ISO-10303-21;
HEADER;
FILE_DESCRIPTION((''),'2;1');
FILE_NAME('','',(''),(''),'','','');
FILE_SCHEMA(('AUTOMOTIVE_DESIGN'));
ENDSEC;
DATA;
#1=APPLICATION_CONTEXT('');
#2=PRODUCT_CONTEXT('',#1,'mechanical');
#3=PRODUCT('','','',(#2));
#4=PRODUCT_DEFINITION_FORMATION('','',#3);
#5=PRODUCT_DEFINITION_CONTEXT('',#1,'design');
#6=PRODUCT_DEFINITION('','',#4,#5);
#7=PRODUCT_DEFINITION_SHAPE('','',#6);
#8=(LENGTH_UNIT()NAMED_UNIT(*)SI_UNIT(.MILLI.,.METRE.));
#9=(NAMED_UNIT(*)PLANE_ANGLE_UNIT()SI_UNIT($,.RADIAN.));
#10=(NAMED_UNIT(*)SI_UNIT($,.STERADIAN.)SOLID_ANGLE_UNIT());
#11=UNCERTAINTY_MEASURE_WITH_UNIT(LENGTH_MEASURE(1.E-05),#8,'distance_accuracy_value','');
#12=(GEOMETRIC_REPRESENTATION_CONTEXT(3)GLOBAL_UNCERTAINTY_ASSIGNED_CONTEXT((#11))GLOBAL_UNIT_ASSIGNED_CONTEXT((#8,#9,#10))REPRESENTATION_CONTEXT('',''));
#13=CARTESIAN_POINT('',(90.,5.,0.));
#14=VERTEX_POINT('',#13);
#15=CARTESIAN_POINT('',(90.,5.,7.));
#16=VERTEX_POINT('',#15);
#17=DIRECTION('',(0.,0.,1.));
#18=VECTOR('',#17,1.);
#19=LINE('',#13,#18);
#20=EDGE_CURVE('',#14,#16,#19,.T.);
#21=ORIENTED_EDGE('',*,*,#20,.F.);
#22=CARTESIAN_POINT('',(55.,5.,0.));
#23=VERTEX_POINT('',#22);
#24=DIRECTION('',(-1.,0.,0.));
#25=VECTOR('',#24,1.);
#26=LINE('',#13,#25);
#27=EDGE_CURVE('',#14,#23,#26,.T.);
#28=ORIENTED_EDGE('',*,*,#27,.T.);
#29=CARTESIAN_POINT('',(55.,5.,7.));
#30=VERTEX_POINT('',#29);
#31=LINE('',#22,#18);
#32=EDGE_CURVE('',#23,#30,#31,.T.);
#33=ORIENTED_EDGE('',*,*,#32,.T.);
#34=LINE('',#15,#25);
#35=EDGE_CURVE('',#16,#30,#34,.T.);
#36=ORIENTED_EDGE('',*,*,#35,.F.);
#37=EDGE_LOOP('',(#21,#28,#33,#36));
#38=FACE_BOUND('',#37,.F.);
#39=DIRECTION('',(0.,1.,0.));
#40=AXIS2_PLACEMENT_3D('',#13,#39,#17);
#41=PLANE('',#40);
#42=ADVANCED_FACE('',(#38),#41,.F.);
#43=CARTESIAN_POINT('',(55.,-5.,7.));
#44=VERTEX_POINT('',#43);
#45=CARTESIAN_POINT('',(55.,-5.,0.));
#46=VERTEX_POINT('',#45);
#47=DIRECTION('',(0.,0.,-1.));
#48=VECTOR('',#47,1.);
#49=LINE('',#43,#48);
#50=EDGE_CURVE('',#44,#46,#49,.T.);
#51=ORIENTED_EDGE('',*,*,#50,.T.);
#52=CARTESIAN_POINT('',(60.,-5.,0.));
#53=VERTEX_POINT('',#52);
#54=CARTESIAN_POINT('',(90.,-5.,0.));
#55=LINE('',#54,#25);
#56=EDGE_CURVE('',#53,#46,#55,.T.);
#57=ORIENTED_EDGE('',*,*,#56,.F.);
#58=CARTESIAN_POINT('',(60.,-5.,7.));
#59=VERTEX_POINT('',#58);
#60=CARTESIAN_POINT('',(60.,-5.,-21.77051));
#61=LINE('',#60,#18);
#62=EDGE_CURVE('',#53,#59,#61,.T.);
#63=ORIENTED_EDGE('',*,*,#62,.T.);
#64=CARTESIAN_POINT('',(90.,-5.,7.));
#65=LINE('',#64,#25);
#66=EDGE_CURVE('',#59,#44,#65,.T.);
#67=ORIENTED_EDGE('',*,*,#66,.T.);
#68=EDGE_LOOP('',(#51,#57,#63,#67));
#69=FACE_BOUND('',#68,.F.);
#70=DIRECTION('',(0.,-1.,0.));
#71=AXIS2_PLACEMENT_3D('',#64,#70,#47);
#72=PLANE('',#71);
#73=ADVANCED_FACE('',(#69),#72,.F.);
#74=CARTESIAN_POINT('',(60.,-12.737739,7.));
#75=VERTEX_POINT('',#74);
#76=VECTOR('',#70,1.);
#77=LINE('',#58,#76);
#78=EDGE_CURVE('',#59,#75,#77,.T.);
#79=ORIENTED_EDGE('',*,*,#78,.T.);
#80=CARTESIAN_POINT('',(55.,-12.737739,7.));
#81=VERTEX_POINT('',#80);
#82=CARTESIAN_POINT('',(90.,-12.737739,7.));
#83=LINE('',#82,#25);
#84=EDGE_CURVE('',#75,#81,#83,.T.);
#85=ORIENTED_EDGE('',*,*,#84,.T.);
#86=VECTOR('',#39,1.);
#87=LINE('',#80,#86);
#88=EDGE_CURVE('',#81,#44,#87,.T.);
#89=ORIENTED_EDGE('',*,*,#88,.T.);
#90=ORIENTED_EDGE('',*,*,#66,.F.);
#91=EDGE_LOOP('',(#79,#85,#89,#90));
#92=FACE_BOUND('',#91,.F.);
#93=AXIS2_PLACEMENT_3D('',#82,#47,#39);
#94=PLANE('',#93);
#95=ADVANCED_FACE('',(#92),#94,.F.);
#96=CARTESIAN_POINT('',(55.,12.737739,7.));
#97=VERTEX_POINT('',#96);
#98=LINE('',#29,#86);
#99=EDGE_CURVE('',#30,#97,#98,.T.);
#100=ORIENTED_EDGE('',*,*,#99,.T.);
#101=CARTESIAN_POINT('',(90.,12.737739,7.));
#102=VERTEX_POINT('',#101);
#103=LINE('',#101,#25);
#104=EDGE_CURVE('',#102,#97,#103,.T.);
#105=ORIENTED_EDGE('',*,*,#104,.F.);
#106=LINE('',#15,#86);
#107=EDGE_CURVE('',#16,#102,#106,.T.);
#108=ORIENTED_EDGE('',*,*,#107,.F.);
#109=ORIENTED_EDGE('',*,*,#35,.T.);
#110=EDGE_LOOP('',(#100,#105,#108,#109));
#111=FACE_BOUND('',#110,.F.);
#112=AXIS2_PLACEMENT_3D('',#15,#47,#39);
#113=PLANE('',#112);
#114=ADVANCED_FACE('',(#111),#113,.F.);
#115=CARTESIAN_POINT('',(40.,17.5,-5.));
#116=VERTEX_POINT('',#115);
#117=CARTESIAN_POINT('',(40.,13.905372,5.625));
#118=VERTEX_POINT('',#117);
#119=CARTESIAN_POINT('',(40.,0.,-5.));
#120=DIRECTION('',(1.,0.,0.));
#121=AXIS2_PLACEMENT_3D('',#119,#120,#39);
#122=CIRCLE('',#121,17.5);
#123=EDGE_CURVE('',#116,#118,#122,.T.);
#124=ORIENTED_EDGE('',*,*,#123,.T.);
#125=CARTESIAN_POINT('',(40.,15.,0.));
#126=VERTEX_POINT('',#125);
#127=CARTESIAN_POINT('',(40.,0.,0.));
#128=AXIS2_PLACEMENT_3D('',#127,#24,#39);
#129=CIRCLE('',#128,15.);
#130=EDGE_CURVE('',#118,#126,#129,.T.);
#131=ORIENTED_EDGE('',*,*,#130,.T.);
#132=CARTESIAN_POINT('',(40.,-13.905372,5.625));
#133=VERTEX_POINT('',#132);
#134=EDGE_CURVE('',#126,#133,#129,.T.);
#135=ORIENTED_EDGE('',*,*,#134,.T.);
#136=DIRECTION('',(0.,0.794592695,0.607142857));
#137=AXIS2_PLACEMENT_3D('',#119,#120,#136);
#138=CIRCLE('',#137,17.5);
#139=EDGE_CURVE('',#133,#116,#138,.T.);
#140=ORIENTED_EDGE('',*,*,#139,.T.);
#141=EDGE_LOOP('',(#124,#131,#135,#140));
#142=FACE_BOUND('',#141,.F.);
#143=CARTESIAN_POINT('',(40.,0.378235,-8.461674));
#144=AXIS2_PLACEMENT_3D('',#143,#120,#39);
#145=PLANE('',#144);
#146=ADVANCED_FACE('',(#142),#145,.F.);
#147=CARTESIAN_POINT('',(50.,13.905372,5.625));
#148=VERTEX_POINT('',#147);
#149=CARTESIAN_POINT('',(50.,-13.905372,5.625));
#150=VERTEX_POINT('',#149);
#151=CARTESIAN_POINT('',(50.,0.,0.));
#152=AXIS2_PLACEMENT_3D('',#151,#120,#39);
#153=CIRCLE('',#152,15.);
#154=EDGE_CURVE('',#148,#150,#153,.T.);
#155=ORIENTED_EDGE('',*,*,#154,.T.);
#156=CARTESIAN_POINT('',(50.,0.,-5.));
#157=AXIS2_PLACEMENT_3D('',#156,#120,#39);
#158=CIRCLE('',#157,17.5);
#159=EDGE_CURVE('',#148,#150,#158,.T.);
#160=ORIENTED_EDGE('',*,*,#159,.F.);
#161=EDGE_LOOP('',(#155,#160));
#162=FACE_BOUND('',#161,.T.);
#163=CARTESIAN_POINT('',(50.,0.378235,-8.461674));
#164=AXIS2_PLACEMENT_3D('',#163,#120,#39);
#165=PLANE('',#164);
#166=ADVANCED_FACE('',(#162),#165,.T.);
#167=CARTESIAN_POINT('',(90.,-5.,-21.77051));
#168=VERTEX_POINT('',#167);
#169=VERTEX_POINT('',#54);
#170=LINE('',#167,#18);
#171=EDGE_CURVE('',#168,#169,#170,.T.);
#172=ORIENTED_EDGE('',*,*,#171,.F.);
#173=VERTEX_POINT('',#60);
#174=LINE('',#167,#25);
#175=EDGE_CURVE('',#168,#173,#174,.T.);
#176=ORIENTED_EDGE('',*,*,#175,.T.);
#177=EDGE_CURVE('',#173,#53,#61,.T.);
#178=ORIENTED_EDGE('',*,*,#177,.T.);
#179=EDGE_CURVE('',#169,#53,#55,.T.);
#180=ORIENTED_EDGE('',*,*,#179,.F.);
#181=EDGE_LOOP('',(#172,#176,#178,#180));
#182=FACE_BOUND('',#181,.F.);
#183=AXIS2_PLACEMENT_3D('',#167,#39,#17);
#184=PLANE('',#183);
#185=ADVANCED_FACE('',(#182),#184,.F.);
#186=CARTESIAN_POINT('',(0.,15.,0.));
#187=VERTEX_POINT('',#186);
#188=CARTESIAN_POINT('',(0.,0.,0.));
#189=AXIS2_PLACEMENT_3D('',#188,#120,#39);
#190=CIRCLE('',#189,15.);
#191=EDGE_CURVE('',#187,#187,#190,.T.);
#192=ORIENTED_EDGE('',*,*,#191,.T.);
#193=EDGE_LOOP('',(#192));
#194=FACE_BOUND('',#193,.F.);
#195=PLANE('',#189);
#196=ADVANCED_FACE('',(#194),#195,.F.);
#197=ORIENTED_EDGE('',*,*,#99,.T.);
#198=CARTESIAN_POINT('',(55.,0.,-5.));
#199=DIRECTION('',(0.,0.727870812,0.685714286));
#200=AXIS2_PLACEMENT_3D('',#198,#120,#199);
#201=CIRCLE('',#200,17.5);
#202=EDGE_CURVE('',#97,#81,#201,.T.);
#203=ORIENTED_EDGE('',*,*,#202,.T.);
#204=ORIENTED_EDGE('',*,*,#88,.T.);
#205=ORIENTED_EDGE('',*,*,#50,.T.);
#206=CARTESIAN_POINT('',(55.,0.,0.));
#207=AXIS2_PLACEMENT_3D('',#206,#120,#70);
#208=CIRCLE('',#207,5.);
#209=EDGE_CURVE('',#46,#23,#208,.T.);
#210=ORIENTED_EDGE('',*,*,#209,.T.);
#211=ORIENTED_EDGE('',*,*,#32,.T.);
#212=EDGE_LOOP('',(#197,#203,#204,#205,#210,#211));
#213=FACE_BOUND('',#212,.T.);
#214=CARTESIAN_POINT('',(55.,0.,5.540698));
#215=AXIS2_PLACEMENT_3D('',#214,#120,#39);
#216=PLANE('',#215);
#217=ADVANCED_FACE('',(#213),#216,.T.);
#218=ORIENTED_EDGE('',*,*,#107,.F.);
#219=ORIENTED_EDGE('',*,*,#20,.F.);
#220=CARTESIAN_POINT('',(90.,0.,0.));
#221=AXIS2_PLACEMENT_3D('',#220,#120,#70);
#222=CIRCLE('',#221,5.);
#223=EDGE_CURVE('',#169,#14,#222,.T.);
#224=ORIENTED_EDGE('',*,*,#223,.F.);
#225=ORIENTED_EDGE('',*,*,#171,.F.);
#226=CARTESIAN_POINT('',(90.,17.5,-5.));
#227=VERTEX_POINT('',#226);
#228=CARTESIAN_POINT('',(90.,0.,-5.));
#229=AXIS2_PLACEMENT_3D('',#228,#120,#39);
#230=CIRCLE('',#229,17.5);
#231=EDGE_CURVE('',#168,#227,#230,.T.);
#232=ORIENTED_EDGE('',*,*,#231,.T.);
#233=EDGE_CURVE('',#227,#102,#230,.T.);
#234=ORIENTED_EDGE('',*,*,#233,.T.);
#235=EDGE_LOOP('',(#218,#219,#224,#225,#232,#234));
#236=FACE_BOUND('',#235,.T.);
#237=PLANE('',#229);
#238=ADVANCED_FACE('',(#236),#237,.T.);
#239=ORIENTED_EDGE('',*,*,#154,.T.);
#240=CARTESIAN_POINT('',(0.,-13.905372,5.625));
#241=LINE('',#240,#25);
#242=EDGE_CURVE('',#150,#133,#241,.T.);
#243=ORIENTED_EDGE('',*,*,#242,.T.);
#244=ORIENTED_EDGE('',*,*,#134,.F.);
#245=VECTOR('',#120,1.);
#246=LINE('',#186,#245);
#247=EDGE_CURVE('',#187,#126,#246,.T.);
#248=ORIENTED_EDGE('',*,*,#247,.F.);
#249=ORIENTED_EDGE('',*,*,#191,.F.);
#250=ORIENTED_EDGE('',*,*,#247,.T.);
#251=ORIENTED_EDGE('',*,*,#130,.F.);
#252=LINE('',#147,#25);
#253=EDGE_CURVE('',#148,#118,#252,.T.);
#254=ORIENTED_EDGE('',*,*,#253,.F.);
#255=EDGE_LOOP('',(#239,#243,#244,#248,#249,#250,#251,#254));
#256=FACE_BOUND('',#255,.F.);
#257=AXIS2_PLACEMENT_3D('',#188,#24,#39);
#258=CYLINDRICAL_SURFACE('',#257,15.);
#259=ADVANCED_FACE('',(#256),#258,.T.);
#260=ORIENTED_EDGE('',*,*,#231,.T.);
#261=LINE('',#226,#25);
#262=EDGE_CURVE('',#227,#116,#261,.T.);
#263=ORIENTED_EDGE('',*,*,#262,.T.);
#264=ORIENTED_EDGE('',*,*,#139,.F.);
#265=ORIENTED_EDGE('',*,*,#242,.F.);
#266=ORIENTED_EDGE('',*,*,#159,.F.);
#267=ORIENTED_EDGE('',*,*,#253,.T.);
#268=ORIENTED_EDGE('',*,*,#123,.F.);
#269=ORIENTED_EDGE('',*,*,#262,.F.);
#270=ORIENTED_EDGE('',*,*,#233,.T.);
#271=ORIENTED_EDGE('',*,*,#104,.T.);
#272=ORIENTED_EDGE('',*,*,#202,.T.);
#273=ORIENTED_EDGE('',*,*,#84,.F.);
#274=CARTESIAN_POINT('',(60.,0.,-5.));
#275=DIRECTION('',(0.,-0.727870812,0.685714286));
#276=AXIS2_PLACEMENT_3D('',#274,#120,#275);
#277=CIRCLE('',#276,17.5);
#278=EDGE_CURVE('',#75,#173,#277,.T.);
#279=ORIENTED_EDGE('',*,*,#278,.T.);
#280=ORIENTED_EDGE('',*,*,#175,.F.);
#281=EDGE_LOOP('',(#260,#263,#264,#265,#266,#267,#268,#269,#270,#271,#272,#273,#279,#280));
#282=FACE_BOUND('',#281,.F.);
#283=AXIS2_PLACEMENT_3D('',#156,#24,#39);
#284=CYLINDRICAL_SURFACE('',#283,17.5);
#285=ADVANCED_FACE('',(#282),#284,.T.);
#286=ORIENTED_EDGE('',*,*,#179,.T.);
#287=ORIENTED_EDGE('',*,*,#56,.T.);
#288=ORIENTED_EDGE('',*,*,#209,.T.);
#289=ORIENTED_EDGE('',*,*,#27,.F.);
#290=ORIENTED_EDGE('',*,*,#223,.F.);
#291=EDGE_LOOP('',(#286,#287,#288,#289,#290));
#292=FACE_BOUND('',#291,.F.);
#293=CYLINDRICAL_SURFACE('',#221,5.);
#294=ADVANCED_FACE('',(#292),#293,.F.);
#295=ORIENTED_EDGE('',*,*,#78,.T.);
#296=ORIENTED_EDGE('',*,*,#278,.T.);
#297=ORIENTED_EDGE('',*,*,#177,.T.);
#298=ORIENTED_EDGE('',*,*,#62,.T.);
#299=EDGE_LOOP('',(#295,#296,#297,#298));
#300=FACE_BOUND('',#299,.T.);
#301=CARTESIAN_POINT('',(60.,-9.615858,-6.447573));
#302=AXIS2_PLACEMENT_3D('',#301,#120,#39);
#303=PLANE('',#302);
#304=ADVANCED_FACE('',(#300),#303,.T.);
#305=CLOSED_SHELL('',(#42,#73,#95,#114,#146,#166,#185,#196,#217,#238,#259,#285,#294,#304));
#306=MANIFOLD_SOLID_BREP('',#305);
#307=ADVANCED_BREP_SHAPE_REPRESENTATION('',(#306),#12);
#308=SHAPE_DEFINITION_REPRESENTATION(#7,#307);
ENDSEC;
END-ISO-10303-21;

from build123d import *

# Parameters (mm, degrees)
F0_R     = 15
F1_DEPTH = 50
F3_DEPTH = 10
F2_R     = 17.5
F4_DEPTH = 40
F7_DEPTH = 35
F8_DEPTH = 30


with BuildPart() as f1:
    # F0 (on Right) → F1 (new body)
    with BuildSketch(Plane.YZ):
        Circle(F0_R)
    extrude(amount=F1_DEPTH)

    # F2 (on face) → F3 (join)
    with BuildSketch(Plane.YZ.offset(50)):
        with BuildLine():
            ThreePointArc((-13.9053721633, 5.625), (-5.6082968512, -21.5770023354), (17.5, -5))
            ThreePointArc((17.5, -5), (16.5770023354, 0.6082968512), (13.9053721633, 5.625))
            ThreePointArc((13.9053721633, 5.625), (14.7238001625, 2.8652589369), (15, 0))
            ThreePointArc((15, 0), (-2.8652589369, -14.7238001625), (-13.9053721633, 5.625))
        make_face()
        with BuildLine():
            ThreePointArc((15, 0), (14.7238001625, 2.8652589369), (13.9053721633, 5.625))
            ThreePointArc((13.9053721633, 5.625), (0, 12.5), (-13.9053721633, 5.625))
            ThreePointArc((-13.9053721633, 5.625), (-2.8652589369, -14.7238001625), (15, 0))
        make_face()
    extrude(amount=-F3_DEPTH)

    # F2 (on face) → F4 (join)
    with BuildSketch(Plane.YZ.offset(50)):
        with Locations((0, -5)):
            Circle(F2_R)
    extrude(amount=F4_DEPTH)

    # F6 (on face) → F7 (cut)
    with BuildSketch(Plane.YZ.offset(90)):
        with BuildLine():
            ThreePointArc((12.7377392029, 7), (0, 12.5), (-12.7377392029, 7))
            Line((-12.7377392029, 7), (-5, 7))
            Line((-5, 7), (-5, 0))
            ThreePointArc((-5, 0), (0, -5), (5, 0))
            Line((5, 0), (5, 7))
            Line((5, 7), (12.7377392029, 7))
        make_face()
    extrude(amount=-F7_DEPTH, mode=Mode.SUBTRACT)

    # F6 (on face) → F8 (cut)
    with BuildSketch(Plane.YZ.offset(90)):
        with BuildLine():
            Line((-5, 7), (-12.7377392029, 7))
            ThreePointArc((-12.7377392029, 7), (-16.8994794889, -9.5450624864), (-5, -21.7705098312))
            Line((-5, -21.7705098312), (-5, 0))
            Line((-5, 0), (-5, 7))
        make_face()
    extrude(amount=-F8_DEPTH, mode=Mode.SUBTRACT)


solid = f1.part
